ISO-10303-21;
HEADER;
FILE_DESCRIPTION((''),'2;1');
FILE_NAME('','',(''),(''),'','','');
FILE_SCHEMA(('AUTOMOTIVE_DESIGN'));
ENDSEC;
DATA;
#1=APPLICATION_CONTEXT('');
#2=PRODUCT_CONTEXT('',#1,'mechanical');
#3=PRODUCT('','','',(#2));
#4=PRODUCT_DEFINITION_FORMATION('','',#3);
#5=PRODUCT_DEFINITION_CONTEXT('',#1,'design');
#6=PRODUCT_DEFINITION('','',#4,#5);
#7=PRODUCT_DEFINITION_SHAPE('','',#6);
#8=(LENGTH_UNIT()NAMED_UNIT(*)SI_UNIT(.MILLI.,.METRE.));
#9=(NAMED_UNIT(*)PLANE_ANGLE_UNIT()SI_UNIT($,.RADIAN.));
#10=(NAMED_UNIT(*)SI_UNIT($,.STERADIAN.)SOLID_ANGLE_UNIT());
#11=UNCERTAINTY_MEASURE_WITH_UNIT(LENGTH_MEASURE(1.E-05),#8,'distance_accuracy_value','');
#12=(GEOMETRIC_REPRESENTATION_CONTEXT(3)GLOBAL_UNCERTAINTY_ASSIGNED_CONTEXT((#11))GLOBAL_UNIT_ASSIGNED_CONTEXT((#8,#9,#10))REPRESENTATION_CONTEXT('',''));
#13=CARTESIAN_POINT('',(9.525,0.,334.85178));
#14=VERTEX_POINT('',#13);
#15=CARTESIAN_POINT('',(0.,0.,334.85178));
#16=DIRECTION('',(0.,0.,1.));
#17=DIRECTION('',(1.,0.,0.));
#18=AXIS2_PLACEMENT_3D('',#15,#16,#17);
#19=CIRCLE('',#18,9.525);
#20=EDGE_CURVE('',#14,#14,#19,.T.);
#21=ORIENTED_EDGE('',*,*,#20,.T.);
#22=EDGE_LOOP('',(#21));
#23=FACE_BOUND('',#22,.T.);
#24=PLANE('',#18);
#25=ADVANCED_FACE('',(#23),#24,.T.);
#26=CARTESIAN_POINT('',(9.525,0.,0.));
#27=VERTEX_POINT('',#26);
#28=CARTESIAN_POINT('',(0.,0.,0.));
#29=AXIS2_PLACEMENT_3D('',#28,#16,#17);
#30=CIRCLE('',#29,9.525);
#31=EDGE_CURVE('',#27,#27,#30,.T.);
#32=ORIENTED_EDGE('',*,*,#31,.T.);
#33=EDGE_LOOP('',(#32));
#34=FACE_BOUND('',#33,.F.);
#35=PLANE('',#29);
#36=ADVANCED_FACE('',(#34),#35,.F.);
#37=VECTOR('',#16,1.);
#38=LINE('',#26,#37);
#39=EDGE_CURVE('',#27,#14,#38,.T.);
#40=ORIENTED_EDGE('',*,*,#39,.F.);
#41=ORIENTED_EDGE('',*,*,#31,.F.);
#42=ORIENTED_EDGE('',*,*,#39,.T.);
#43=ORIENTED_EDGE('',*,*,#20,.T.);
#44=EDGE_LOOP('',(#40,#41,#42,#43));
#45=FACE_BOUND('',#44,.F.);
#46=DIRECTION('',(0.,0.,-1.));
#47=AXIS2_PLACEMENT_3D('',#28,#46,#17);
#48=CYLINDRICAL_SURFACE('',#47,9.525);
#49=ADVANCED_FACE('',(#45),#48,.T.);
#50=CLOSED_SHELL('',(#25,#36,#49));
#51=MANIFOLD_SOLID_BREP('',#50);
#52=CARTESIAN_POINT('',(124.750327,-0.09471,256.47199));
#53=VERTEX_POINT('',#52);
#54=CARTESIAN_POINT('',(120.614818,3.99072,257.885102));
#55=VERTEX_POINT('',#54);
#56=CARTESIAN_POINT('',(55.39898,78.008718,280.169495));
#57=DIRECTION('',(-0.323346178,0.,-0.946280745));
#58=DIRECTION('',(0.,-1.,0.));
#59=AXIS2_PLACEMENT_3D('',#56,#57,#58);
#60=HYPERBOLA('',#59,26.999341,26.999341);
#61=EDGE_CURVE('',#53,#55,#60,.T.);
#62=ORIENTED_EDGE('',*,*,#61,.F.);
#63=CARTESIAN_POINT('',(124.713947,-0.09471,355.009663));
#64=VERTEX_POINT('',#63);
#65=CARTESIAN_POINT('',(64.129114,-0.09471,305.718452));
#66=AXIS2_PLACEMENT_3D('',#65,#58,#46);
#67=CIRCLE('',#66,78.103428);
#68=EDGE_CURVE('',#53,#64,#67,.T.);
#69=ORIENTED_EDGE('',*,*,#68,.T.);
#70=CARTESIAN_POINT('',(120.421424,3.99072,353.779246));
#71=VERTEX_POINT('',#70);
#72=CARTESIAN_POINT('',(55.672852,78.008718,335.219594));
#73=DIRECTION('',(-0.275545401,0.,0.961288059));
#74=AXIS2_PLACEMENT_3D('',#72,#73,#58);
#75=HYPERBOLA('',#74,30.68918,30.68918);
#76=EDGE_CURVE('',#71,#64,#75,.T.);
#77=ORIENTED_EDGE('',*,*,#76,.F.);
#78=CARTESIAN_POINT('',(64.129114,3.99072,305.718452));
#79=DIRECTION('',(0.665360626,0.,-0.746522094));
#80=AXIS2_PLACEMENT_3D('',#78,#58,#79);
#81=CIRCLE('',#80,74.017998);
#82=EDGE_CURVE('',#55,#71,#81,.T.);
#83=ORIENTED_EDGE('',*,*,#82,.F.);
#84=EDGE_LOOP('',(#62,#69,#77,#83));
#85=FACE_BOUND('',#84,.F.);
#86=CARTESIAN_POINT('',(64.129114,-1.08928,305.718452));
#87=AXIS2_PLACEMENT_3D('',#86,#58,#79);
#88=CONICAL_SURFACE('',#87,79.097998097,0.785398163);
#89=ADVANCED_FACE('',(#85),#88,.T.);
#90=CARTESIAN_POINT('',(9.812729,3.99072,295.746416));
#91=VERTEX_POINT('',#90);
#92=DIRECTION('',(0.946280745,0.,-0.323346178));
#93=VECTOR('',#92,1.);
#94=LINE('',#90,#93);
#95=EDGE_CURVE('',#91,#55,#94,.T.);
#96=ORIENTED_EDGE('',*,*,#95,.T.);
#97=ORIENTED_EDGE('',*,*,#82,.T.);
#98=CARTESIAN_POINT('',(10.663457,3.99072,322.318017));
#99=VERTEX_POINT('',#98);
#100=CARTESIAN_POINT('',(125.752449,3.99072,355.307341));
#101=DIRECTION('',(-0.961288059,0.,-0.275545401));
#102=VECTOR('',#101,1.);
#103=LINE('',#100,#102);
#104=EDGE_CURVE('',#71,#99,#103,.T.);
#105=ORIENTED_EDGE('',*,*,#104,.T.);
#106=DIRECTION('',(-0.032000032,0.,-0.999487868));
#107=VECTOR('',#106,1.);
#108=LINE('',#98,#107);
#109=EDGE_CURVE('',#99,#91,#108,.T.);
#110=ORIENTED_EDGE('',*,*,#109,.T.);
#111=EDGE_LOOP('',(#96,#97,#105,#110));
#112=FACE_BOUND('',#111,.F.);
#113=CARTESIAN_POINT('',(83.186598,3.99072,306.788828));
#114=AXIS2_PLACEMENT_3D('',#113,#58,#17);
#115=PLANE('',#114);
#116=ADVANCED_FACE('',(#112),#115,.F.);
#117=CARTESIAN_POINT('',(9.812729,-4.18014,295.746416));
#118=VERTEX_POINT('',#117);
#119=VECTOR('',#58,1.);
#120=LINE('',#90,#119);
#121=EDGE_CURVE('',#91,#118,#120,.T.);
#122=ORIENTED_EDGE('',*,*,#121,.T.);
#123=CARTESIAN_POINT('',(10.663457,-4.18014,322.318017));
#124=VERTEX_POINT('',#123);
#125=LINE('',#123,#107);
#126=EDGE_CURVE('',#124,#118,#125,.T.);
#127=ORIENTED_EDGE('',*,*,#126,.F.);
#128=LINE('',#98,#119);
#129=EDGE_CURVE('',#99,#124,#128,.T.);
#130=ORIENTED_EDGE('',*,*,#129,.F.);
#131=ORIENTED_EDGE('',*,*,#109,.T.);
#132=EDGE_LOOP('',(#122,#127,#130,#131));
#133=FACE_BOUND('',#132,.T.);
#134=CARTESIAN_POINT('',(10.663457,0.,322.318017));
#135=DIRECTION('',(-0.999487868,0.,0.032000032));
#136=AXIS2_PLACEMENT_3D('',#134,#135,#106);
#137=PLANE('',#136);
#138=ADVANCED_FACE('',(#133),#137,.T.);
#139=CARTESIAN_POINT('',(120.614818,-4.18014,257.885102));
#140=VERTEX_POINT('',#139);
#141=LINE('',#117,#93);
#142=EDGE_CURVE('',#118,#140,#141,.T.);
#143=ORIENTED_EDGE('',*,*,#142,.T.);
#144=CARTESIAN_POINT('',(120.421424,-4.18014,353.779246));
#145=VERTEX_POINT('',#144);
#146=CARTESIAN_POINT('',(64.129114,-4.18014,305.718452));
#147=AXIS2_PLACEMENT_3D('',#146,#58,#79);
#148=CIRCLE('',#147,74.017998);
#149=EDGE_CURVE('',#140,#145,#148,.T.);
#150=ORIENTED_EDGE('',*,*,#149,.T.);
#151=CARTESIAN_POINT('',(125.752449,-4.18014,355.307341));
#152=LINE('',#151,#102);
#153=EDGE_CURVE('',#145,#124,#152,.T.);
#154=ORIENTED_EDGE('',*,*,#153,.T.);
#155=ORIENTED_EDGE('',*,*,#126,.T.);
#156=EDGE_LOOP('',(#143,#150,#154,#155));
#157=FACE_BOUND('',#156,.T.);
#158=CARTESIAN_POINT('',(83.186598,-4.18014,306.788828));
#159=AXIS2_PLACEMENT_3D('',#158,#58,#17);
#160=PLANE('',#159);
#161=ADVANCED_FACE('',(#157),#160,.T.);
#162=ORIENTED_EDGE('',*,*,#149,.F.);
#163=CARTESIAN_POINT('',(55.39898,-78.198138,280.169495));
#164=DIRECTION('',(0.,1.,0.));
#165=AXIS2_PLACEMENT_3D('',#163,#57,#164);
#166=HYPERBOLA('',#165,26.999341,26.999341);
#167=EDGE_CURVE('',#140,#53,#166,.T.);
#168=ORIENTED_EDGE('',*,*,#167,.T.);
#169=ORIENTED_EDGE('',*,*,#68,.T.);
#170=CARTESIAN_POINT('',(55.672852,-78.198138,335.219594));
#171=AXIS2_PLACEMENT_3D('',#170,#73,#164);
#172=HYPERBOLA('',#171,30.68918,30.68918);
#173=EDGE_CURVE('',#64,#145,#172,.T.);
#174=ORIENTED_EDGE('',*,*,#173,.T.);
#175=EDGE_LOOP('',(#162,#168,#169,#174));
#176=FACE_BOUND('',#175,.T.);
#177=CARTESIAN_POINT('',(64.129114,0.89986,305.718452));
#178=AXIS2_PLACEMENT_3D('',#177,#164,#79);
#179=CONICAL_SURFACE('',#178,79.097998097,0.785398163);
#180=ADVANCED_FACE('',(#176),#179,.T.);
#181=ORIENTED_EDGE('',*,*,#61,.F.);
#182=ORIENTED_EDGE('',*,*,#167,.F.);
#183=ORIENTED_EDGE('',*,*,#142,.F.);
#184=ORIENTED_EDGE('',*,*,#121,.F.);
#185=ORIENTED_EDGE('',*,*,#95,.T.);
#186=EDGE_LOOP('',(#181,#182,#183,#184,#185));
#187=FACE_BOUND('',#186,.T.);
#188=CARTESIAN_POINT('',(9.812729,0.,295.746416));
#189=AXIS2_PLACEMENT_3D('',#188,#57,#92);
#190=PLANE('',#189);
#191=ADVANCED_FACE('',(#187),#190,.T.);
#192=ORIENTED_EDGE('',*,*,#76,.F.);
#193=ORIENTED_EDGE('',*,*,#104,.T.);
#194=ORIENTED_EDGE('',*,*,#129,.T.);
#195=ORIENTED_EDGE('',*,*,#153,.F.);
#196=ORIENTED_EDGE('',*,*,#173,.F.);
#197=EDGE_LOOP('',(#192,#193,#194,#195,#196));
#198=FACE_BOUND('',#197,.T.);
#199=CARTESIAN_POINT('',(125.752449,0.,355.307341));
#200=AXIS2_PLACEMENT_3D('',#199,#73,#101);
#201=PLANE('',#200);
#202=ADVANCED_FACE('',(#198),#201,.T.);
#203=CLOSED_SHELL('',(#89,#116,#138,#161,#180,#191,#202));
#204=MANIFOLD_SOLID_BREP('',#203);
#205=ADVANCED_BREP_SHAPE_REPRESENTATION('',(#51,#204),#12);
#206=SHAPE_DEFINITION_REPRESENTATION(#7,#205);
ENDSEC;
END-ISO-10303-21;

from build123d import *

# Parameters (mm, degrees)
F0_R          = 9.525
F1_DEPTH      = 334.85178
F3_DEPTH      = 4.18014
F3_DEPTH_BACK = 3.99072
F4_T2_ANGLE   = 96.5800048024
F4_T4_ANGLE   = 96.5800048024


# Not quite as in the source:
# - a fillet or chamfer that OpenCascade refuses, or shapes differently, is made with other operations: its cross-section is extruded or revolved along the edge and cut away or added


with BuildPart() as f1:
    # F0 (on Top) → F1 (new body)
    with BuildSketch(Plane.XY):
        Circle(F0_R)
    extrude(amount=F1_DEPTH)


with BuildPart() as f3:
    # F2 (on Front) → F3 (new body, two sides)
    with BuildSketch(Plane.XZ) as f3_sk:
        with BuildLine():
            Line((125.7524490356, 355.3073406219), (10.6634572148, 322.3180174828))
            Line((10.6634572148, 322.3180174828), (9.8127294332, 295.7464158535))
            Line((9.8127294332, 295.7464158535), (125.7524490356, 256.1295628548))
            ThreePointArc((125.7524490356, 256.1295628548), (143.2271122484, 305.7184517384), (125.7524490356, 355.3073406219))
        make_face()
    extrude(amount=F3_DEPTH)
    extrude(f3_sk.sketch, amount=-F3_DEPTH_BACK)

    # F4: chamfer of 5.08 on 2 edges, made by hand

    # F4_s1 → F4_t2 (revolve, cut)
    with BuildSketch(Plane(origin=(187.5911639165, 0, 167.1963566243), x_dir=(0, 1, 0), z_dir=(-0.7465220942, 0, -0.6653606262))):
        Polygon((0.89986, -106.4585931816), (-4.18014, -111.5385931816), (-4.18014, -106.4585931816), align=None)
    revolve(axis=Axis((64.129114151, -4.18014, 305.7184517384), (0, -1, 0)), revolution_arc=F4_T2_ANGLE, mode=Mode.SUBTRACT)

    # F4_s3 → F4_t4 (revolve, cut)
    with BuildSketch(Plane(origin=(187.5911639165, 0, 167.1963566243), x_dir=(0, 1, 0), z_dir=(-0.7465220942, 0, -0.6653606262))):
        Polygon((-1.08928, -106.4585931816), (3.99072, -111.5385931816), (3.99072, -106.4585931816), align=None)
    revolve(axis=Axis((64.129114151, 3.99072, 305.7184517384), (0, -1, 0)), revolution_arc=F4_T4_ANGLE, mode=Mode.SUBTRACT)


solid = Compound([f1.part, f3.part])
